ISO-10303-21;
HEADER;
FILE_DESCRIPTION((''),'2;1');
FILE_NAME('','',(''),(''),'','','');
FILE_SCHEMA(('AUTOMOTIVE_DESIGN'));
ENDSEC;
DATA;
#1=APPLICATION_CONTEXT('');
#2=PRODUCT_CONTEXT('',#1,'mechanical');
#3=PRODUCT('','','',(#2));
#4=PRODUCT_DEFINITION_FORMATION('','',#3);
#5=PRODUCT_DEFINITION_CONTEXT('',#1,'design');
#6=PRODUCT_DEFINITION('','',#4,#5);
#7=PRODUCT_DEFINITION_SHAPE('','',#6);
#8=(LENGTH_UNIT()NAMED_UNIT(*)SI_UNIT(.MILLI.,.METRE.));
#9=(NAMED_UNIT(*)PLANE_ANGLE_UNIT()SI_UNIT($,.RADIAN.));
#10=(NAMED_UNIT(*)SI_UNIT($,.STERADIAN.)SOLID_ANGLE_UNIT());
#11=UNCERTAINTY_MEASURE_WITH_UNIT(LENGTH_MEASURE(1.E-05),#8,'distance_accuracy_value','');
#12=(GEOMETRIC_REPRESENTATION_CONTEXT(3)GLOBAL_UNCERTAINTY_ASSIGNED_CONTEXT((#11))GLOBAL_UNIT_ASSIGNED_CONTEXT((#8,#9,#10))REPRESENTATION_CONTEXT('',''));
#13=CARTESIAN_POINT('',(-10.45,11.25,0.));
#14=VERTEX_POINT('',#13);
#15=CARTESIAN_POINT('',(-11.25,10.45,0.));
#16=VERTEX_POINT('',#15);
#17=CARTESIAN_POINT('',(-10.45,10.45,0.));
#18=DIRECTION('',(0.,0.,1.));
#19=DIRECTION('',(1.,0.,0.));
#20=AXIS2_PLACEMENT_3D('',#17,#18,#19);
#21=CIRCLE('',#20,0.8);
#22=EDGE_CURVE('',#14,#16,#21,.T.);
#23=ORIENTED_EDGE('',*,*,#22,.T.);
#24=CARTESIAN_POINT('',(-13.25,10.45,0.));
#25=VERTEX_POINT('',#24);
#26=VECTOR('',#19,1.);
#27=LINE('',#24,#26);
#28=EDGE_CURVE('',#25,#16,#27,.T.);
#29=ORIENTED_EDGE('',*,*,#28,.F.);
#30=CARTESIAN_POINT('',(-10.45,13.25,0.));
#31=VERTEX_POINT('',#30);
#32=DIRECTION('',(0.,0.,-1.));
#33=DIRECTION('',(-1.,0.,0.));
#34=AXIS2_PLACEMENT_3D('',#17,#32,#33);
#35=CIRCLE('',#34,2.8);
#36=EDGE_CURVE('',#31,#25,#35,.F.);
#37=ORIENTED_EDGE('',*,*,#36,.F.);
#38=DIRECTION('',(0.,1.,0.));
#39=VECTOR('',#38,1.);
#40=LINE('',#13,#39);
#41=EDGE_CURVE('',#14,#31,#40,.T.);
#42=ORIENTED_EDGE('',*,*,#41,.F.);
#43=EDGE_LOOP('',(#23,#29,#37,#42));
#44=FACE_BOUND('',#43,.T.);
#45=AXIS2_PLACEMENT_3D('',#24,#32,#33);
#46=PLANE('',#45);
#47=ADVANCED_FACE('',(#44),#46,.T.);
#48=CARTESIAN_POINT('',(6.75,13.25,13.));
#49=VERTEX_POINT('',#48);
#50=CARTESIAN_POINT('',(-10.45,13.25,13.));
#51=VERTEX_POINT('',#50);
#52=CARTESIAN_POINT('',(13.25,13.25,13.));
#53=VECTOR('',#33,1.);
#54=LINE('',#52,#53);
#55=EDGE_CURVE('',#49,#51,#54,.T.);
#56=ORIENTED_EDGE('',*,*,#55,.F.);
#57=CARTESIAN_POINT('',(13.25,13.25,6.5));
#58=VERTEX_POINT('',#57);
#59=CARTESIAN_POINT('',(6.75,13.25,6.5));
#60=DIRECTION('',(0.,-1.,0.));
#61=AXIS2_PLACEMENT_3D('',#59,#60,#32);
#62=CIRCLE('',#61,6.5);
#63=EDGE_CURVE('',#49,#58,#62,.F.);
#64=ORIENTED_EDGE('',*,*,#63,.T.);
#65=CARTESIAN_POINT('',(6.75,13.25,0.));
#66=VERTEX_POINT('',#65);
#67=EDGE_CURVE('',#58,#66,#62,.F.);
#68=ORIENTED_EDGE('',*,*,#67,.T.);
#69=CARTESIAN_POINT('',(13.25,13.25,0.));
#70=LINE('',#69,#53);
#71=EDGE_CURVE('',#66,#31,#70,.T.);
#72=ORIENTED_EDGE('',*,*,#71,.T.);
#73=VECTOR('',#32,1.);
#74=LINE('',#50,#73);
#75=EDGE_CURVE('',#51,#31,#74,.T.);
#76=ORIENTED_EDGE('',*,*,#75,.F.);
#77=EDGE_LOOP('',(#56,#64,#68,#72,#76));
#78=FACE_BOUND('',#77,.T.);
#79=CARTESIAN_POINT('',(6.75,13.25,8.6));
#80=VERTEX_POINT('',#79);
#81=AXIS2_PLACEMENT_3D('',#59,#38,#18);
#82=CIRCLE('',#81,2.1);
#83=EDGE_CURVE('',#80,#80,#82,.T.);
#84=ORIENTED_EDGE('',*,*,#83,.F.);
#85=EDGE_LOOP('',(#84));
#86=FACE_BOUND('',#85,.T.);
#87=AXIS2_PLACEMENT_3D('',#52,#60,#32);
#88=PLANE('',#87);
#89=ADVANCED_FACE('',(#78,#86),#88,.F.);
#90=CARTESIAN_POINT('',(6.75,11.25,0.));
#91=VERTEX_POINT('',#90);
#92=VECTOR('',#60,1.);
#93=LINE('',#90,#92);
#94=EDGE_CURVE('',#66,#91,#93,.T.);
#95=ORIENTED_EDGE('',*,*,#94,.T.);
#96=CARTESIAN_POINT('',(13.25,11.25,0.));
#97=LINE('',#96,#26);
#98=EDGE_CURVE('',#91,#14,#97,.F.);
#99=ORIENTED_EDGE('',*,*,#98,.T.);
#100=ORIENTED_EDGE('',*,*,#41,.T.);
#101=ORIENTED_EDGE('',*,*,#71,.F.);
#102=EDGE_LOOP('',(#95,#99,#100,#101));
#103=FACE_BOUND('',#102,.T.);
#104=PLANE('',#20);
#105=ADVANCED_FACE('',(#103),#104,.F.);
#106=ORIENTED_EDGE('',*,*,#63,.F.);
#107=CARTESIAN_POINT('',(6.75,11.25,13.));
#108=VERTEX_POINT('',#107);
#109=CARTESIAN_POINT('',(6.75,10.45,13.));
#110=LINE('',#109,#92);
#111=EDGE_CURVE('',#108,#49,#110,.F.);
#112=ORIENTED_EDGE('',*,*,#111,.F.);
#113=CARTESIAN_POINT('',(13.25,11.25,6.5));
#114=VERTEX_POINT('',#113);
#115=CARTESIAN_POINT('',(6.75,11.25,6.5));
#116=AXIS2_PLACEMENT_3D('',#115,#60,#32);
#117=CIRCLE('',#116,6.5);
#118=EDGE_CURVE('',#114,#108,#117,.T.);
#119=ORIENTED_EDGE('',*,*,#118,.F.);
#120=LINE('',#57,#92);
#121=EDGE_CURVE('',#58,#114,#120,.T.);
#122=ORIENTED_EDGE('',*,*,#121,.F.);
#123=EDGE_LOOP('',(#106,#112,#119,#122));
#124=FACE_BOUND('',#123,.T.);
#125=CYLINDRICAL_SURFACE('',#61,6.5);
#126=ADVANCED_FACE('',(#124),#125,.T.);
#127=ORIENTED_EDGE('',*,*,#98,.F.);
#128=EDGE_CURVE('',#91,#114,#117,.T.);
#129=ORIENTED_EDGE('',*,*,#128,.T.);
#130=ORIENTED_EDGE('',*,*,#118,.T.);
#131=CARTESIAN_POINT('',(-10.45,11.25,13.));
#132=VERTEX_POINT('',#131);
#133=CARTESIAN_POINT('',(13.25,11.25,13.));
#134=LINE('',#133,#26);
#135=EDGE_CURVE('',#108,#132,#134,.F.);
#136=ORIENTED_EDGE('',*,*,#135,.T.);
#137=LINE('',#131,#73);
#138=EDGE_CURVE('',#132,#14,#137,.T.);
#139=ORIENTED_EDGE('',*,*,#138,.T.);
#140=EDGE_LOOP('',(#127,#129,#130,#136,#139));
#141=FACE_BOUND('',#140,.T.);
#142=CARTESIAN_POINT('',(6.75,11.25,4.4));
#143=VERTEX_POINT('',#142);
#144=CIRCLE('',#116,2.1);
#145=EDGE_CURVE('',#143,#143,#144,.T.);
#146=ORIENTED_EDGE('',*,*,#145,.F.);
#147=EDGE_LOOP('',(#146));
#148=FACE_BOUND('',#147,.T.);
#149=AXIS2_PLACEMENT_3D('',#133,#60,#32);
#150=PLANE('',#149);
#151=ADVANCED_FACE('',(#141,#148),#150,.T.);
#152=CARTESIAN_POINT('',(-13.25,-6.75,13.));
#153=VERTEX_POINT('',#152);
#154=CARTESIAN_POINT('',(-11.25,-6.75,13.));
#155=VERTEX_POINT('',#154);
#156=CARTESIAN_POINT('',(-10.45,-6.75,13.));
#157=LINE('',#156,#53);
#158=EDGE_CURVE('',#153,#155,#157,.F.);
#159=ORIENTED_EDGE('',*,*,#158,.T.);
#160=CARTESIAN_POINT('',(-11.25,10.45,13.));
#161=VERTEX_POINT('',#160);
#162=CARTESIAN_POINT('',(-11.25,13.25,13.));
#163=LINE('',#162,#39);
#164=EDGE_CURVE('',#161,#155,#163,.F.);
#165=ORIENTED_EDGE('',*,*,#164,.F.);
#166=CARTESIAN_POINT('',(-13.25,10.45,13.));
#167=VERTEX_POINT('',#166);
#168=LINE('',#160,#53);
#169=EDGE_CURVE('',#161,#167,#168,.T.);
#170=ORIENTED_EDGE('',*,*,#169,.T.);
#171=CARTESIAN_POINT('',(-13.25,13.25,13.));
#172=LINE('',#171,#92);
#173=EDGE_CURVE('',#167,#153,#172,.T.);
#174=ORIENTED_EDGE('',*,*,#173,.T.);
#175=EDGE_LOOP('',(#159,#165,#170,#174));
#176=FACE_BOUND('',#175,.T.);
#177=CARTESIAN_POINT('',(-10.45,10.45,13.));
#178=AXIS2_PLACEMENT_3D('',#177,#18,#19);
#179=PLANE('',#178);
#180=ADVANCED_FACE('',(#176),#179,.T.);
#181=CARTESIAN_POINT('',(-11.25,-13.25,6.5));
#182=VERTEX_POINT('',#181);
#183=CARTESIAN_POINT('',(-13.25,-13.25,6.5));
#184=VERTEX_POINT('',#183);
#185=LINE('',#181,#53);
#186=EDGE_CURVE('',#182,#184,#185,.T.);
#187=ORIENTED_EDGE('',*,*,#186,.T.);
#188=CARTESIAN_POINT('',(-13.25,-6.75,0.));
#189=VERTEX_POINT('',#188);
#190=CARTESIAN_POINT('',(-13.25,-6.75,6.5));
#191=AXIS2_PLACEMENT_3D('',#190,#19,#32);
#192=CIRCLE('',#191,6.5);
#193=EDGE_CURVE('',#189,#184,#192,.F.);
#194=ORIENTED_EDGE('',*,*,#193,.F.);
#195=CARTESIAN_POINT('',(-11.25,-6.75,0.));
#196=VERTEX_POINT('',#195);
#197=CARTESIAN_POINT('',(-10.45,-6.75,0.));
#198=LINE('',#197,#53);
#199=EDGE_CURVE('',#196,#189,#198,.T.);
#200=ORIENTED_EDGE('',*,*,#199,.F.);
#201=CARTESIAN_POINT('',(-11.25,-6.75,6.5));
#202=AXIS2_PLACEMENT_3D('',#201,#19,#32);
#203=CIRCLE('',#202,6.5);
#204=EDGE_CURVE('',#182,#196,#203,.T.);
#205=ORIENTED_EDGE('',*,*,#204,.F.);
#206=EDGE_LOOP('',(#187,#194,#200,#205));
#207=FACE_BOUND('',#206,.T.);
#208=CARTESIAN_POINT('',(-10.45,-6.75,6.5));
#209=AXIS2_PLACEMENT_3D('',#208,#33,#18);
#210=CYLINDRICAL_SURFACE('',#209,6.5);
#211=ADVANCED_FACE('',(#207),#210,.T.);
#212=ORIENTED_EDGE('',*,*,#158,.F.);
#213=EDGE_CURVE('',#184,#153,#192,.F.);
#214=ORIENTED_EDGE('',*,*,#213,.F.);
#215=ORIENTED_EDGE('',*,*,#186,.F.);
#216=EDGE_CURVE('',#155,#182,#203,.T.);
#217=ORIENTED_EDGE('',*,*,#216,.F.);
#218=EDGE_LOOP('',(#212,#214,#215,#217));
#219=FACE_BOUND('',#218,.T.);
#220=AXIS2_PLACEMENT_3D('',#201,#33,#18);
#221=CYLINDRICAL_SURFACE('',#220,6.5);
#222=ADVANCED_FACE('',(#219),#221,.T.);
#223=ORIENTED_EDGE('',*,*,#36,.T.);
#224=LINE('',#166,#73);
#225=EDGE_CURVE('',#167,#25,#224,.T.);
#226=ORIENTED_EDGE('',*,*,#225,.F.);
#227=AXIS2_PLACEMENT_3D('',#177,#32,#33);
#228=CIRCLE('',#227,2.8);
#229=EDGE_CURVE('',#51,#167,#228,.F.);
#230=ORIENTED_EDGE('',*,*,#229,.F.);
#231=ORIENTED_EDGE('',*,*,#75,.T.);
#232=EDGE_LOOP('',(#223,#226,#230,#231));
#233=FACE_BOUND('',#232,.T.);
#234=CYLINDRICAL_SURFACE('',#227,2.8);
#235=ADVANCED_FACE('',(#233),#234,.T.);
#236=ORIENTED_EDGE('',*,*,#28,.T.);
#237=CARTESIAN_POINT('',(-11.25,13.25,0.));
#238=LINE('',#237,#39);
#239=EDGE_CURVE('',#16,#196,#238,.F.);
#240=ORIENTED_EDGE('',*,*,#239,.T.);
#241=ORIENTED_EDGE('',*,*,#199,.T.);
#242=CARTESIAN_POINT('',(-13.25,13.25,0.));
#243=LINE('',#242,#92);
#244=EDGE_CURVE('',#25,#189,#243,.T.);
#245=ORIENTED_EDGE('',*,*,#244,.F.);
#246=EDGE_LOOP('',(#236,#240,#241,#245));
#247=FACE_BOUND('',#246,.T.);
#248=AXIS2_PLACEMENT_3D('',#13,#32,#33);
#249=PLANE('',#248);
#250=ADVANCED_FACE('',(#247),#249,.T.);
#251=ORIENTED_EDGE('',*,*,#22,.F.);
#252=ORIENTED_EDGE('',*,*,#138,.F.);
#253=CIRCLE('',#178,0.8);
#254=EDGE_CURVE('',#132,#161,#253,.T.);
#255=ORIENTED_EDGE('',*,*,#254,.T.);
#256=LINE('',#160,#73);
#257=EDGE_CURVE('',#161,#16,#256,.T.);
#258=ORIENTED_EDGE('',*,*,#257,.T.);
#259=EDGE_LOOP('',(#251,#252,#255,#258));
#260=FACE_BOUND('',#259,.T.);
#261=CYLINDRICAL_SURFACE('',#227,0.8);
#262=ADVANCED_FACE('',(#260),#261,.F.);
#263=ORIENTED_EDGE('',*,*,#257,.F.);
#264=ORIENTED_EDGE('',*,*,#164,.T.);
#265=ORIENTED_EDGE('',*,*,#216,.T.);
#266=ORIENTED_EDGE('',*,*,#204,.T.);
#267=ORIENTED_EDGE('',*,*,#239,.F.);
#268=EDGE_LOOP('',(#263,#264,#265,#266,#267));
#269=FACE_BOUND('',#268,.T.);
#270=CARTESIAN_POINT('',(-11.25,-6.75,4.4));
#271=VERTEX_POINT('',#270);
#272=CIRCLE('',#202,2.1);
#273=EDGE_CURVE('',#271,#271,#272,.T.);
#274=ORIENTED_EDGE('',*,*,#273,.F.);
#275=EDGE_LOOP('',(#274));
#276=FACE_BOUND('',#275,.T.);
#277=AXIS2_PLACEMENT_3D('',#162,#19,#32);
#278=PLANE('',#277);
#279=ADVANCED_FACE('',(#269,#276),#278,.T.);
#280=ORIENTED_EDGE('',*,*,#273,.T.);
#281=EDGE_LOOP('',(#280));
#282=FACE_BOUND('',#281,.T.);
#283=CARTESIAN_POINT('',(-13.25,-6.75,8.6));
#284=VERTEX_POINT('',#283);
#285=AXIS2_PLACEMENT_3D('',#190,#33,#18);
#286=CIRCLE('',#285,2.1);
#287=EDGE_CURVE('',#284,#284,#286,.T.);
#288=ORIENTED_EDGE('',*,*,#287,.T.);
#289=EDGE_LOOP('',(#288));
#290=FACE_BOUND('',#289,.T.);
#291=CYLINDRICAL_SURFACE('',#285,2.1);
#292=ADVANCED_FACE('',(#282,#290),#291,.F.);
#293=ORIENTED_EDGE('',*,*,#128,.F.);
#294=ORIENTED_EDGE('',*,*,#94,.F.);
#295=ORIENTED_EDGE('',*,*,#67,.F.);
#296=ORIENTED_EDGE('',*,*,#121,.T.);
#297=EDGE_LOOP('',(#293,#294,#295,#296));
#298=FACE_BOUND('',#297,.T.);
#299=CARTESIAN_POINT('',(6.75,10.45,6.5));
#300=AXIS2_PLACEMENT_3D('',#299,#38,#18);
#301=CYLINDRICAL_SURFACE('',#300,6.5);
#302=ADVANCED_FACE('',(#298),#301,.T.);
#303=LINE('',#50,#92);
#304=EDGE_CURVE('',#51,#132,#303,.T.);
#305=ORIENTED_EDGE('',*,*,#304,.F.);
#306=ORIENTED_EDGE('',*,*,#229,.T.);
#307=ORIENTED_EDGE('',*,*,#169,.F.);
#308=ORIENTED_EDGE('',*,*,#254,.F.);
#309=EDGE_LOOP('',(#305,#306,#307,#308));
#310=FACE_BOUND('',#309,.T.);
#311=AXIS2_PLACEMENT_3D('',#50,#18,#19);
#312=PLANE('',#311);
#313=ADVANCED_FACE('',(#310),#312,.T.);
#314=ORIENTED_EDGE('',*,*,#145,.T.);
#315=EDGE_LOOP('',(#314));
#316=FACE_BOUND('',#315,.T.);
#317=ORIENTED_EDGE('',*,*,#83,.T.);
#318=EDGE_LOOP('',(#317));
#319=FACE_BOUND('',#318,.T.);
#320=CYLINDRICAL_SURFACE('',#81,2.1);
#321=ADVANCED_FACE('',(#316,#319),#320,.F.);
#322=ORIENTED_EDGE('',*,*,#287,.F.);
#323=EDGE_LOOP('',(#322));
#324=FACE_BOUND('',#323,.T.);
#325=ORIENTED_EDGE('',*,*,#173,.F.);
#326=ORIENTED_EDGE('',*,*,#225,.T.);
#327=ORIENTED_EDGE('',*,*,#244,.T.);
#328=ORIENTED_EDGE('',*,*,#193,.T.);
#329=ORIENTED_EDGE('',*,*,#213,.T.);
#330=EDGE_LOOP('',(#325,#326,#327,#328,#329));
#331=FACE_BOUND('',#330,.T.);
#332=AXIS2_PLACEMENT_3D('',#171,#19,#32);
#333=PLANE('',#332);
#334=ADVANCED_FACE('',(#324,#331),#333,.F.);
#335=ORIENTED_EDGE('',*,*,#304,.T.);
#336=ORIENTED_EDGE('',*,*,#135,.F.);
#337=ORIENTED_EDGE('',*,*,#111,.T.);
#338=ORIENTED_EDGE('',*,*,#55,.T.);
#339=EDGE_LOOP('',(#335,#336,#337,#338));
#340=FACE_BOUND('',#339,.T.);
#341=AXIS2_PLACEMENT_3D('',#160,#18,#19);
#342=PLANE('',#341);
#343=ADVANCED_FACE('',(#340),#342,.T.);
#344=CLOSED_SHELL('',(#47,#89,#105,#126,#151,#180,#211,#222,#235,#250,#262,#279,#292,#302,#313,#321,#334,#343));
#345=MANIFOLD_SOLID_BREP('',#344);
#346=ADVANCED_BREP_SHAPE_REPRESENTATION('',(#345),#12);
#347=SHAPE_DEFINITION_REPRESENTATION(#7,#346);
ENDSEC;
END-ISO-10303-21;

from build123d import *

# Parameters (mm, degrees)
BASE_FLANGE1_DEPTH    = 13
FILLET1_R             = 6.5
M5X0_8_TAPPED_HOLE1_D = 4.2
M5X0_8_TAPPED_HOLE2_D = 4.2


# Sheet-metal steps are written as plain solids
with BuildPart() as part:
    # Sketch1 → Base-Flange1 (new body)
    with BuildSketch(Plane.XY):
        with BuildLine():
            Line((13.25, 13.25), (-10.45, 13.25))
            ThreePointArc((-10.45, 13.25), (-12.429898987, 12.429898987), (-13.25, 10.45))
            Line((-13.25, 10.45), (-13.25, -13.25))
            Line((-13.25, -13.25), (-11.25, -13.25))
            Line((-11.25, -13.25), (-11.25, 10.45))
            ThreePointArc((-11.25, 10.45), (-11.015685425, 11.015685425), (-10.45, 11.25))
            Line((-10.45, 11.25), (13.25, 11.25))
            Line((13.25, 11.25), (13.25, 13.25))
        make_face()
    extrude(amount=BASE_FLANGE1_DEPTH)

    # Fillet1
    fillet1_edges = [part.edges().sort_by_distance(p)[0] for p in [
        (-12.25, -13.25, 0),
        (-12.25, -13.25, 13),
        (13.25, 12.25, 0),
        (13.25, 12.25, 13),
    ]]
    fillet(fillet1_edges, radius=FILLET1_R - 0.0001)  # a hair under: the kernel refuses the full size

    # M5x0.8 Tapped Hole1 (through all)
    with Locations(Plane(origin=(0, 13.25, 0), x_dir=(-1, 0, 0), z_dir=(0, 1, 0))):
        with Locations((-6.75, 6.5)):
            Hole(M5X0_8_TAPPED_HOLE1_D / 2)

    # M5x0.8 Tapped Hole2 (through all)
    with Locations(Plane.ZY.offset(13.25)):
        with Locations((6.5, -6.75)):
            Hole(M5X0_8_TAPPED_HOLE2_D / 2)


solid = part.part
